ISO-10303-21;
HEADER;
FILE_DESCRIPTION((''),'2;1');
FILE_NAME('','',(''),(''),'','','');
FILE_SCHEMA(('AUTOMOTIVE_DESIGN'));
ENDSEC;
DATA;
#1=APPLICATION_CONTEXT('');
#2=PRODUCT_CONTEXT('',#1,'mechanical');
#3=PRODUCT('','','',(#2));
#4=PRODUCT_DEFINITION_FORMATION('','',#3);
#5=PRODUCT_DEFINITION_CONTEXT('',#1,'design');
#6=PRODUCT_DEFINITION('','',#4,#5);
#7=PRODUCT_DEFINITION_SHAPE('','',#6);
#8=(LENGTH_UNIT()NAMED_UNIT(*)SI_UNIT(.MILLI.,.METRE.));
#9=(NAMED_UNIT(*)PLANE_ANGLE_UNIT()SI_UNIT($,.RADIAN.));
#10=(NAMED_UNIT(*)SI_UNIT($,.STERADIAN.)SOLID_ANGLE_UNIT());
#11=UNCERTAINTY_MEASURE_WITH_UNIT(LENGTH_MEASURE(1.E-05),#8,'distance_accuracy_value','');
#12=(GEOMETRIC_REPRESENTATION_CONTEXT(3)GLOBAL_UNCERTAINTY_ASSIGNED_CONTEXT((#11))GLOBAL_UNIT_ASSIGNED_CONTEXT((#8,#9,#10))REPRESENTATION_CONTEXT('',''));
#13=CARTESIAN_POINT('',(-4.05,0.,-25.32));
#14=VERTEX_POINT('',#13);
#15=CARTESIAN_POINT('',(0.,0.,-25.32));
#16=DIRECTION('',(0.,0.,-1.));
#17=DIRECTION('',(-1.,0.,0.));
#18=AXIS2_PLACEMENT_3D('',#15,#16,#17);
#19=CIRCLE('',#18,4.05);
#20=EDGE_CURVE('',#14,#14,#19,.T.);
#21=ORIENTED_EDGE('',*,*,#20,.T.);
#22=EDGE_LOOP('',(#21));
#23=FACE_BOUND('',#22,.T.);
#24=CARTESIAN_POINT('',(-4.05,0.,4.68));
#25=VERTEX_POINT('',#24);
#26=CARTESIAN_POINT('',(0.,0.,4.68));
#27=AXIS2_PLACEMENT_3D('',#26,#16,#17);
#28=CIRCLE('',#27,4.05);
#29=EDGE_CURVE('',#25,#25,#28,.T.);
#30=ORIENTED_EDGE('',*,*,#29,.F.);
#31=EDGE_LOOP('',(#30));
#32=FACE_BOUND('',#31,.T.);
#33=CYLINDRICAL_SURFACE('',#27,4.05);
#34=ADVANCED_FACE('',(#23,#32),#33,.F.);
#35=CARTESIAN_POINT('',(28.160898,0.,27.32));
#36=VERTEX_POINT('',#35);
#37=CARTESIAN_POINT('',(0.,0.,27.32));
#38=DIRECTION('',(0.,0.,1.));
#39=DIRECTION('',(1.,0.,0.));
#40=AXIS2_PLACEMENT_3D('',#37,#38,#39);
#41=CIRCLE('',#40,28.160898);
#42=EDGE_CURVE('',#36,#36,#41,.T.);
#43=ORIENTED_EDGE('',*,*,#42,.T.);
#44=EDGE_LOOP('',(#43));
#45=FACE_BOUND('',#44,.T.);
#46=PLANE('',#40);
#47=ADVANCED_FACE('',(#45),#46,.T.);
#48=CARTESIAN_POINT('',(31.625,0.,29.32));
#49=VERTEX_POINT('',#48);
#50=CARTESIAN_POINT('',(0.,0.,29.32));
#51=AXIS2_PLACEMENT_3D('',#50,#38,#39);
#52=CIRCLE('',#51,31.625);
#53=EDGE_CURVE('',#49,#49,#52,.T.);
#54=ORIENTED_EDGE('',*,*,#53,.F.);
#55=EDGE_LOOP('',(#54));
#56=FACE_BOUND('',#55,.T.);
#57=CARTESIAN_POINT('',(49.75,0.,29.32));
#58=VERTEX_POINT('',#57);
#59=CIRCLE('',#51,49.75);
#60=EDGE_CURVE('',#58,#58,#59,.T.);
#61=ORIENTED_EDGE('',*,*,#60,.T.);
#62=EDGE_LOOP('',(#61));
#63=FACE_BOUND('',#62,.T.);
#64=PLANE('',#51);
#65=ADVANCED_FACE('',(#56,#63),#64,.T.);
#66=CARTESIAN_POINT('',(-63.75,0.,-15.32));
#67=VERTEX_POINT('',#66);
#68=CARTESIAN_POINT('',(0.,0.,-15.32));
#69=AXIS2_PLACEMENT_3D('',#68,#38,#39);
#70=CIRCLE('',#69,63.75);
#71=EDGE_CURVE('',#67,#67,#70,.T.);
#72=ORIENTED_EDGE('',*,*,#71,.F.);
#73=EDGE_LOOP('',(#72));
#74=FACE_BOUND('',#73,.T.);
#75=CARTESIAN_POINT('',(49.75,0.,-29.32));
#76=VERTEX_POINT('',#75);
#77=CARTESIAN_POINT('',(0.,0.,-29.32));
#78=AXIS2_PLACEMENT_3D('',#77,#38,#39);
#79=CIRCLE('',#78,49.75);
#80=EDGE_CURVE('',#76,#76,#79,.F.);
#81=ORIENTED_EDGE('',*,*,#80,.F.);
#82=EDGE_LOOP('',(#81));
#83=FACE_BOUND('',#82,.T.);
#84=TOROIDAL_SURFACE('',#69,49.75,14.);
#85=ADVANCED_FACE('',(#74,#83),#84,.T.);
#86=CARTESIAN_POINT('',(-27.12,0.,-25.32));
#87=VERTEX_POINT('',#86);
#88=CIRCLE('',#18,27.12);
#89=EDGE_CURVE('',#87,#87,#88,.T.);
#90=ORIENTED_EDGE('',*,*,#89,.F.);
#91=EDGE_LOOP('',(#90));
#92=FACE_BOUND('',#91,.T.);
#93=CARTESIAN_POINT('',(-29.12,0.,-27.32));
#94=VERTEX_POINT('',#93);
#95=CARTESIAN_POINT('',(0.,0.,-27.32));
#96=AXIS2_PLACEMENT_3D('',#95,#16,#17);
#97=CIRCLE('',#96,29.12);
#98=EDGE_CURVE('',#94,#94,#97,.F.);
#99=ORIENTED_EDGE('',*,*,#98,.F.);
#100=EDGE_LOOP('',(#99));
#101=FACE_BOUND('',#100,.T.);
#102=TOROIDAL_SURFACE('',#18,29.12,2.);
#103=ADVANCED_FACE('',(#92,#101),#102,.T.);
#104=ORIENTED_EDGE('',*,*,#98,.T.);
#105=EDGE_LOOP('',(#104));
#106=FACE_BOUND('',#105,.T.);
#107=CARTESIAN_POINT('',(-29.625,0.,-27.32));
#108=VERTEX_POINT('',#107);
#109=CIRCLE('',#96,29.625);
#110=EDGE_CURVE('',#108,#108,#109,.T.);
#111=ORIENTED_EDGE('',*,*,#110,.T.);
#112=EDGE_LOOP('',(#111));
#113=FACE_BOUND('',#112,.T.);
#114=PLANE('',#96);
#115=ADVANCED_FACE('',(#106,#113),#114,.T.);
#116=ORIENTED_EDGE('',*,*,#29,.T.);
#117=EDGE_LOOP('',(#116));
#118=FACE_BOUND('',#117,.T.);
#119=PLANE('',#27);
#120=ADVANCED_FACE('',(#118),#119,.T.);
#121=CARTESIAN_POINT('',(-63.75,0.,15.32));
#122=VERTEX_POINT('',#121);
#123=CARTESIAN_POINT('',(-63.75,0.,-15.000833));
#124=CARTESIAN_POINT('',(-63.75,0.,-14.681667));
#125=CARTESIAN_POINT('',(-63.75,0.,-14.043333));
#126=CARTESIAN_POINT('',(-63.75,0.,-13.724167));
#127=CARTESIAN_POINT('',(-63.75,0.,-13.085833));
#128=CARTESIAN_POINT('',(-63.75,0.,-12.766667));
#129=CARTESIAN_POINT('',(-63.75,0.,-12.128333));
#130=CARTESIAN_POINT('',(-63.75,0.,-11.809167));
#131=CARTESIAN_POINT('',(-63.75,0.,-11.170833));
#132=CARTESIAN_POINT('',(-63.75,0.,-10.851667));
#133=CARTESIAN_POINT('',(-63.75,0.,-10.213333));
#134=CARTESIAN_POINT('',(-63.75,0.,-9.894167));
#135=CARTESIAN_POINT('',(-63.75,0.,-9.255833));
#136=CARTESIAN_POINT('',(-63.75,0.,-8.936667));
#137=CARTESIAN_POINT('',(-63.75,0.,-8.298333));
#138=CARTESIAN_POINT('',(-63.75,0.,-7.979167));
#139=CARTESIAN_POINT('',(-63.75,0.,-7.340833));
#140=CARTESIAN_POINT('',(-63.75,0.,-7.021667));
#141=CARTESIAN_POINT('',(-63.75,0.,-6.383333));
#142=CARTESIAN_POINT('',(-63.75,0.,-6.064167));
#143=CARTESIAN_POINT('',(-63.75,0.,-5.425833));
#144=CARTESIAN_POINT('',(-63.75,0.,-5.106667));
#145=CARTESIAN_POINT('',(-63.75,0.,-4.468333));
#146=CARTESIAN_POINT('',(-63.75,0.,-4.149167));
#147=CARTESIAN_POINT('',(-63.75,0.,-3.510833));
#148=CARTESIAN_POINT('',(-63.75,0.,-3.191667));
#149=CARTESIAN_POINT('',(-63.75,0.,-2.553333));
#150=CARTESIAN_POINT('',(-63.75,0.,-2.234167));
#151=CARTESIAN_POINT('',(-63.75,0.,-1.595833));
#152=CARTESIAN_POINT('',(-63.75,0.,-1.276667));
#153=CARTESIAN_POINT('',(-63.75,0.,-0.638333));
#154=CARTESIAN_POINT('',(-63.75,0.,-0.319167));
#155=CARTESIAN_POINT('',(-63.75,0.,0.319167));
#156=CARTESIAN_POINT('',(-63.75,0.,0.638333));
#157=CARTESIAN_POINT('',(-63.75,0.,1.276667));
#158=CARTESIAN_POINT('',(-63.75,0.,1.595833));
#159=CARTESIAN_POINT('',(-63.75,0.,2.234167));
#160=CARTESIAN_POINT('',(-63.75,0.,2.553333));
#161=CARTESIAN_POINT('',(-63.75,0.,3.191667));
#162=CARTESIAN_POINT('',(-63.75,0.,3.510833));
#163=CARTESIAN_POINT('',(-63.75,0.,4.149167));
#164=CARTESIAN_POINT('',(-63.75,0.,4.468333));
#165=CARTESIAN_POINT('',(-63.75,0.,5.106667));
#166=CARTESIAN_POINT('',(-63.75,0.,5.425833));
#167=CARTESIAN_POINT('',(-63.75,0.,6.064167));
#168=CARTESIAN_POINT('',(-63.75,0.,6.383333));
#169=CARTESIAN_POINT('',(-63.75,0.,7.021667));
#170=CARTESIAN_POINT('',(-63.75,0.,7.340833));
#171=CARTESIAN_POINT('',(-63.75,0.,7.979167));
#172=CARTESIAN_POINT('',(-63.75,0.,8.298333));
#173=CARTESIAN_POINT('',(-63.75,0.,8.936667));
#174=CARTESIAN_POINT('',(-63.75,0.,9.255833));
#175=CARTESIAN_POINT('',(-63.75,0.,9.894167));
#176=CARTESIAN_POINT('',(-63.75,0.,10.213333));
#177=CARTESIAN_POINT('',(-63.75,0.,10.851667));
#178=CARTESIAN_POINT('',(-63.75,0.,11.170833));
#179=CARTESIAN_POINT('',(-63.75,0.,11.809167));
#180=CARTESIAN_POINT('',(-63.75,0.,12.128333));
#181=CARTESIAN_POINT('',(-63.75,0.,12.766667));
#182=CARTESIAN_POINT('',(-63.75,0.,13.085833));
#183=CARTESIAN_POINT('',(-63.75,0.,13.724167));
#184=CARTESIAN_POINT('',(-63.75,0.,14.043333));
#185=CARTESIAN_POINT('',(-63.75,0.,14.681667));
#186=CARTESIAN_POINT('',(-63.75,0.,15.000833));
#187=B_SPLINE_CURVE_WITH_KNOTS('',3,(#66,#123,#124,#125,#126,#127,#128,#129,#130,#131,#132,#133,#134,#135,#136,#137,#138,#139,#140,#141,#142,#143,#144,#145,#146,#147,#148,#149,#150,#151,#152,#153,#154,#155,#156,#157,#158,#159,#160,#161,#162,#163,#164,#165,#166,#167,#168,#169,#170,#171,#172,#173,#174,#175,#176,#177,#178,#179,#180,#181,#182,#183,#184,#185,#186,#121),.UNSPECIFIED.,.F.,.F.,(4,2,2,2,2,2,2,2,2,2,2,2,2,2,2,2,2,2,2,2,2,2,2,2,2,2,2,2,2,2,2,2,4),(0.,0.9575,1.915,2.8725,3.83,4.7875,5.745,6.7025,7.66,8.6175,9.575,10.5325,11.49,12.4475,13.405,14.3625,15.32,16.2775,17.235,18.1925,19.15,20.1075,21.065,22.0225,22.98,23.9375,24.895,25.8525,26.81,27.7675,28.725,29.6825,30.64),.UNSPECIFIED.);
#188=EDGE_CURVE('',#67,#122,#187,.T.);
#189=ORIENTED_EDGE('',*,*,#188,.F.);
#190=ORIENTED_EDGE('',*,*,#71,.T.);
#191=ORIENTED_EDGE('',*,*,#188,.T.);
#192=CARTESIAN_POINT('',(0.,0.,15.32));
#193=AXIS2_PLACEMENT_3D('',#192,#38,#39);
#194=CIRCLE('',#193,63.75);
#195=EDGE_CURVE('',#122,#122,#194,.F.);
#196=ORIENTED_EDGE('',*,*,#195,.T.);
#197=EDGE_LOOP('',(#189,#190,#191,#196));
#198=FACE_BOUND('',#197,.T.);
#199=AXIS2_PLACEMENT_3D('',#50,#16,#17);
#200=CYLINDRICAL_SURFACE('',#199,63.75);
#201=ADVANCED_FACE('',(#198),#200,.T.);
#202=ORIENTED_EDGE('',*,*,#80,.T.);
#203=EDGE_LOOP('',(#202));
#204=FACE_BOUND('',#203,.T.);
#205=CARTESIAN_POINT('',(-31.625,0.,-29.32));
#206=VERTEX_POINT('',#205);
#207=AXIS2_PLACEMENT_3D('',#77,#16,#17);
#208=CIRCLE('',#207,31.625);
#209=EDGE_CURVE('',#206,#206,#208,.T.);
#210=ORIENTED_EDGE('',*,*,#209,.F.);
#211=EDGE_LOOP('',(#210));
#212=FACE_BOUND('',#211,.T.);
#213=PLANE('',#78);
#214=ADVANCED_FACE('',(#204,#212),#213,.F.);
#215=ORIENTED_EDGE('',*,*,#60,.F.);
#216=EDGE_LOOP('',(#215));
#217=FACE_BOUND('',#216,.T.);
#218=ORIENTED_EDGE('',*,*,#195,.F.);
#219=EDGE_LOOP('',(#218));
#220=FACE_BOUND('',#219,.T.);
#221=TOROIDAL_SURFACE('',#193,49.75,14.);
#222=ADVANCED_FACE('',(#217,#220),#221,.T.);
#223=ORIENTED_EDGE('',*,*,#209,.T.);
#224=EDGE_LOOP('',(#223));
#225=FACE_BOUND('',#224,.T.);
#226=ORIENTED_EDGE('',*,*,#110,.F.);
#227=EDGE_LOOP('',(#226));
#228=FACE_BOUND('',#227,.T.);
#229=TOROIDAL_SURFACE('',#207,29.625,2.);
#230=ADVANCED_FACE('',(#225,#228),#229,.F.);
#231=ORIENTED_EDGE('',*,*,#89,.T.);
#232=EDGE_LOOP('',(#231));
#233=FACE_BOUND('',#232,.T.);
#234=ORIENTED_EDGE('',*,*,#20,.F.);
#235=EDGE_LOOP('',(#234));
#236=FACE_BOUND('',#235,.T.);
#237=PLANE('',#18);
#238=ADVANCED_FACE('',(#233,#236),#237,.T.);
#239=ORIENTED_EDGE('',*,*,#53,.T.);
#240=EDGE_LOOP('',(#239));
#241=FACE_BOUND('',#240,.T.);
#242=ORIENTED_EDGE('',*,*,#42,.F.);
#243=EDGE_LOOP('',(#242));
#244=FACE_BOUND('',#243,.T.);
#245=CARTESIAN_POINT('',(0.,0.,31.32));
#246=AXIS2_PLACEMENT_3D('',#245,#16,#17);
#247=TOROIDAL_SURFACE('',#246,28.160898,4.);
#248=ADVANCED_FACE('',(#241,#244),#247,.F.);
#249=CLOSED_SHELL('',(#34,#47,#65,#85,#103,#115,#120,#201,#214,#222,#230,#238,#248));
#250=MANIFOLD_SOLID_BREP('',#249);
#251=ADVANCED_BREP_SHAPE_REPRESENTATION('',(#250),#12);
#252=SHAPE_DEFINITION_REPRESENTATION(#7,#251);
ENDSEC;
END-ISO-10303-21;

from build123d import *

# Parameters (mm, degrees)
CROQUIS1_R              = 63.75
SALIENTE_EXTRUIR1_DEPTH = 29.32
CROQUIS2_R              = 31.625
CORTAR_EXTRUIR1_DEPTH   = 2
REDONDEO2_R             = 4
REDONDEO3_R             = 14
CROQUIS4_R              = 31.625
CORTAR_EXTRUIR3_DEPTH   = 2
CROQUIS5_R              = 27.12
CORTAR_EXTRUIR4_DEPTH   = 2
REDONDEO4_R             = 14
CROQUIS6_R              = 4.05
CORTAR_EXTRUIR5_DEPTH   = 30
REDONDEO5_R             = 2
REDONDEO6_R             = 2


# Some blends are built 0.0001 mm under size
with BuildPart() as part:
    # Croquis1 → Saliente-Extruir1 (new, symmetric)
    with BuildSketch(Plane.XY):
        with Locations(Location((0, 0, 0), (0, 0, 180))):
            Circle(CROQUIS1_R)
    extrude(amount=SALIENTE_EXTRUIR1_DEPTH, both=True)

    # Croquis2 → Cortar-Extruir1 (cut)
    with BuildSketch(Plane.XY.offset(29.32)):
        Circle(CROQUIS2_R)
    extrude(amount=-CORTAR_EXTRUIR1_DEPTH, mode=Mode.SUBTRACT)

    # Redondeo2
    # the kernel refuses this fillet: 4 mm, written as the material it adds along each edge
    with BuildSketch(Plane(origin=(0, 0, 27.32), x_dir=(1, 0, 0), z_dir=(0, -1, 0))) as redondeo2_piece_1:
        with BuildLine():
            CenterArc((28.160898385, 4), REDONDEO2_R, 270, 60)
            Line((28.160898385, 0), (28.160898385, -0.08))
            Line((28.160898385, -0.08), (31.625, -0.08))
            Line((31.625, -0.08), (31.705, 0))
            ThreePointArc((31.705, 0), (31.705, 1), (31.694282032, 1.96))
            Line((31.694282032, 1.96), (31.625, 2))
        make_face()
    revolve(axis=Axis((0, 0, 27.32), (0, 0, 1)))

    # Redondeo3
    redondeo3_edges = [part.edges().sort_by_distance(p)[0] for p in [
        (63.75, 0, 29.32),
    ]]
    fillet(redondeo3_edges, radius=REDONDEO3_R)

    # Croquis4 → Cortar-Extruir3 (cut)
    with BuildSketch(Plane(origin=(0, 0, -29.32), x_dir=(-1, 0, 0), z_dir=(0, 0, -1))):
        Circle(CROQUIS4_R)
    extrude(amount=-CORTAR_EXTRUIR3_DEPTH, mode=Mode.SUBTRACT)

    # Croquis5 → Cortar-Extruir4 (cut)
    with BuildSketch(Plane(origin=(0, 0, -27.32), x_dir=(-1, 0, 0), z_dir=(0, 0, -1))):
        Circle(CROQUIS5_R)
    extrude(amount=-CORTAR_EXTRUIR4_DEPTH, mode=Mode.SUBTRACT)

    # Redondeo4
    redondeo4_edges = [part.edges().sort_by_distance(p)[0] for p in [
        (63.75, 0, -29.32),
    ]]
    fillet(redondeo4_edges, radius=REDONDEO4_R)

    # Croquis6 → Cortar-Extruir5 (cut)
    with BuildSketch(Plane(origin=(0, 0, -25.32), x_dir=(-1, 0, 0), z_dir=(0, 0, -1))):
        Circle(CROQUIS6_R)
    extrude(amount=-CORTAR_EXTRUIR5_DEPTH, mode=Mode.SUBTRACT)

    # Redondeo5
    redondeo5_edges = [part.edges().sort_by_distance(p)[0] for p in [
        (27.12, 0, -27.32),
    ]]
    fillet(redondeo5_edges, radius=REDONDEO5_R - 0.0001)  # a hair under: the kernel refuses the full size

    # Redondeo6
    redondeo6_edges = [part.edges().sort_by_distance(p)[0] for p in [
        (31.625, 0, -27.32),
    ]]
    fillet(redondeo6_edges, radius=REDONDEO6_R - 0.0001)  # a hair under: the kernel refuses the full size


solid = part.part
